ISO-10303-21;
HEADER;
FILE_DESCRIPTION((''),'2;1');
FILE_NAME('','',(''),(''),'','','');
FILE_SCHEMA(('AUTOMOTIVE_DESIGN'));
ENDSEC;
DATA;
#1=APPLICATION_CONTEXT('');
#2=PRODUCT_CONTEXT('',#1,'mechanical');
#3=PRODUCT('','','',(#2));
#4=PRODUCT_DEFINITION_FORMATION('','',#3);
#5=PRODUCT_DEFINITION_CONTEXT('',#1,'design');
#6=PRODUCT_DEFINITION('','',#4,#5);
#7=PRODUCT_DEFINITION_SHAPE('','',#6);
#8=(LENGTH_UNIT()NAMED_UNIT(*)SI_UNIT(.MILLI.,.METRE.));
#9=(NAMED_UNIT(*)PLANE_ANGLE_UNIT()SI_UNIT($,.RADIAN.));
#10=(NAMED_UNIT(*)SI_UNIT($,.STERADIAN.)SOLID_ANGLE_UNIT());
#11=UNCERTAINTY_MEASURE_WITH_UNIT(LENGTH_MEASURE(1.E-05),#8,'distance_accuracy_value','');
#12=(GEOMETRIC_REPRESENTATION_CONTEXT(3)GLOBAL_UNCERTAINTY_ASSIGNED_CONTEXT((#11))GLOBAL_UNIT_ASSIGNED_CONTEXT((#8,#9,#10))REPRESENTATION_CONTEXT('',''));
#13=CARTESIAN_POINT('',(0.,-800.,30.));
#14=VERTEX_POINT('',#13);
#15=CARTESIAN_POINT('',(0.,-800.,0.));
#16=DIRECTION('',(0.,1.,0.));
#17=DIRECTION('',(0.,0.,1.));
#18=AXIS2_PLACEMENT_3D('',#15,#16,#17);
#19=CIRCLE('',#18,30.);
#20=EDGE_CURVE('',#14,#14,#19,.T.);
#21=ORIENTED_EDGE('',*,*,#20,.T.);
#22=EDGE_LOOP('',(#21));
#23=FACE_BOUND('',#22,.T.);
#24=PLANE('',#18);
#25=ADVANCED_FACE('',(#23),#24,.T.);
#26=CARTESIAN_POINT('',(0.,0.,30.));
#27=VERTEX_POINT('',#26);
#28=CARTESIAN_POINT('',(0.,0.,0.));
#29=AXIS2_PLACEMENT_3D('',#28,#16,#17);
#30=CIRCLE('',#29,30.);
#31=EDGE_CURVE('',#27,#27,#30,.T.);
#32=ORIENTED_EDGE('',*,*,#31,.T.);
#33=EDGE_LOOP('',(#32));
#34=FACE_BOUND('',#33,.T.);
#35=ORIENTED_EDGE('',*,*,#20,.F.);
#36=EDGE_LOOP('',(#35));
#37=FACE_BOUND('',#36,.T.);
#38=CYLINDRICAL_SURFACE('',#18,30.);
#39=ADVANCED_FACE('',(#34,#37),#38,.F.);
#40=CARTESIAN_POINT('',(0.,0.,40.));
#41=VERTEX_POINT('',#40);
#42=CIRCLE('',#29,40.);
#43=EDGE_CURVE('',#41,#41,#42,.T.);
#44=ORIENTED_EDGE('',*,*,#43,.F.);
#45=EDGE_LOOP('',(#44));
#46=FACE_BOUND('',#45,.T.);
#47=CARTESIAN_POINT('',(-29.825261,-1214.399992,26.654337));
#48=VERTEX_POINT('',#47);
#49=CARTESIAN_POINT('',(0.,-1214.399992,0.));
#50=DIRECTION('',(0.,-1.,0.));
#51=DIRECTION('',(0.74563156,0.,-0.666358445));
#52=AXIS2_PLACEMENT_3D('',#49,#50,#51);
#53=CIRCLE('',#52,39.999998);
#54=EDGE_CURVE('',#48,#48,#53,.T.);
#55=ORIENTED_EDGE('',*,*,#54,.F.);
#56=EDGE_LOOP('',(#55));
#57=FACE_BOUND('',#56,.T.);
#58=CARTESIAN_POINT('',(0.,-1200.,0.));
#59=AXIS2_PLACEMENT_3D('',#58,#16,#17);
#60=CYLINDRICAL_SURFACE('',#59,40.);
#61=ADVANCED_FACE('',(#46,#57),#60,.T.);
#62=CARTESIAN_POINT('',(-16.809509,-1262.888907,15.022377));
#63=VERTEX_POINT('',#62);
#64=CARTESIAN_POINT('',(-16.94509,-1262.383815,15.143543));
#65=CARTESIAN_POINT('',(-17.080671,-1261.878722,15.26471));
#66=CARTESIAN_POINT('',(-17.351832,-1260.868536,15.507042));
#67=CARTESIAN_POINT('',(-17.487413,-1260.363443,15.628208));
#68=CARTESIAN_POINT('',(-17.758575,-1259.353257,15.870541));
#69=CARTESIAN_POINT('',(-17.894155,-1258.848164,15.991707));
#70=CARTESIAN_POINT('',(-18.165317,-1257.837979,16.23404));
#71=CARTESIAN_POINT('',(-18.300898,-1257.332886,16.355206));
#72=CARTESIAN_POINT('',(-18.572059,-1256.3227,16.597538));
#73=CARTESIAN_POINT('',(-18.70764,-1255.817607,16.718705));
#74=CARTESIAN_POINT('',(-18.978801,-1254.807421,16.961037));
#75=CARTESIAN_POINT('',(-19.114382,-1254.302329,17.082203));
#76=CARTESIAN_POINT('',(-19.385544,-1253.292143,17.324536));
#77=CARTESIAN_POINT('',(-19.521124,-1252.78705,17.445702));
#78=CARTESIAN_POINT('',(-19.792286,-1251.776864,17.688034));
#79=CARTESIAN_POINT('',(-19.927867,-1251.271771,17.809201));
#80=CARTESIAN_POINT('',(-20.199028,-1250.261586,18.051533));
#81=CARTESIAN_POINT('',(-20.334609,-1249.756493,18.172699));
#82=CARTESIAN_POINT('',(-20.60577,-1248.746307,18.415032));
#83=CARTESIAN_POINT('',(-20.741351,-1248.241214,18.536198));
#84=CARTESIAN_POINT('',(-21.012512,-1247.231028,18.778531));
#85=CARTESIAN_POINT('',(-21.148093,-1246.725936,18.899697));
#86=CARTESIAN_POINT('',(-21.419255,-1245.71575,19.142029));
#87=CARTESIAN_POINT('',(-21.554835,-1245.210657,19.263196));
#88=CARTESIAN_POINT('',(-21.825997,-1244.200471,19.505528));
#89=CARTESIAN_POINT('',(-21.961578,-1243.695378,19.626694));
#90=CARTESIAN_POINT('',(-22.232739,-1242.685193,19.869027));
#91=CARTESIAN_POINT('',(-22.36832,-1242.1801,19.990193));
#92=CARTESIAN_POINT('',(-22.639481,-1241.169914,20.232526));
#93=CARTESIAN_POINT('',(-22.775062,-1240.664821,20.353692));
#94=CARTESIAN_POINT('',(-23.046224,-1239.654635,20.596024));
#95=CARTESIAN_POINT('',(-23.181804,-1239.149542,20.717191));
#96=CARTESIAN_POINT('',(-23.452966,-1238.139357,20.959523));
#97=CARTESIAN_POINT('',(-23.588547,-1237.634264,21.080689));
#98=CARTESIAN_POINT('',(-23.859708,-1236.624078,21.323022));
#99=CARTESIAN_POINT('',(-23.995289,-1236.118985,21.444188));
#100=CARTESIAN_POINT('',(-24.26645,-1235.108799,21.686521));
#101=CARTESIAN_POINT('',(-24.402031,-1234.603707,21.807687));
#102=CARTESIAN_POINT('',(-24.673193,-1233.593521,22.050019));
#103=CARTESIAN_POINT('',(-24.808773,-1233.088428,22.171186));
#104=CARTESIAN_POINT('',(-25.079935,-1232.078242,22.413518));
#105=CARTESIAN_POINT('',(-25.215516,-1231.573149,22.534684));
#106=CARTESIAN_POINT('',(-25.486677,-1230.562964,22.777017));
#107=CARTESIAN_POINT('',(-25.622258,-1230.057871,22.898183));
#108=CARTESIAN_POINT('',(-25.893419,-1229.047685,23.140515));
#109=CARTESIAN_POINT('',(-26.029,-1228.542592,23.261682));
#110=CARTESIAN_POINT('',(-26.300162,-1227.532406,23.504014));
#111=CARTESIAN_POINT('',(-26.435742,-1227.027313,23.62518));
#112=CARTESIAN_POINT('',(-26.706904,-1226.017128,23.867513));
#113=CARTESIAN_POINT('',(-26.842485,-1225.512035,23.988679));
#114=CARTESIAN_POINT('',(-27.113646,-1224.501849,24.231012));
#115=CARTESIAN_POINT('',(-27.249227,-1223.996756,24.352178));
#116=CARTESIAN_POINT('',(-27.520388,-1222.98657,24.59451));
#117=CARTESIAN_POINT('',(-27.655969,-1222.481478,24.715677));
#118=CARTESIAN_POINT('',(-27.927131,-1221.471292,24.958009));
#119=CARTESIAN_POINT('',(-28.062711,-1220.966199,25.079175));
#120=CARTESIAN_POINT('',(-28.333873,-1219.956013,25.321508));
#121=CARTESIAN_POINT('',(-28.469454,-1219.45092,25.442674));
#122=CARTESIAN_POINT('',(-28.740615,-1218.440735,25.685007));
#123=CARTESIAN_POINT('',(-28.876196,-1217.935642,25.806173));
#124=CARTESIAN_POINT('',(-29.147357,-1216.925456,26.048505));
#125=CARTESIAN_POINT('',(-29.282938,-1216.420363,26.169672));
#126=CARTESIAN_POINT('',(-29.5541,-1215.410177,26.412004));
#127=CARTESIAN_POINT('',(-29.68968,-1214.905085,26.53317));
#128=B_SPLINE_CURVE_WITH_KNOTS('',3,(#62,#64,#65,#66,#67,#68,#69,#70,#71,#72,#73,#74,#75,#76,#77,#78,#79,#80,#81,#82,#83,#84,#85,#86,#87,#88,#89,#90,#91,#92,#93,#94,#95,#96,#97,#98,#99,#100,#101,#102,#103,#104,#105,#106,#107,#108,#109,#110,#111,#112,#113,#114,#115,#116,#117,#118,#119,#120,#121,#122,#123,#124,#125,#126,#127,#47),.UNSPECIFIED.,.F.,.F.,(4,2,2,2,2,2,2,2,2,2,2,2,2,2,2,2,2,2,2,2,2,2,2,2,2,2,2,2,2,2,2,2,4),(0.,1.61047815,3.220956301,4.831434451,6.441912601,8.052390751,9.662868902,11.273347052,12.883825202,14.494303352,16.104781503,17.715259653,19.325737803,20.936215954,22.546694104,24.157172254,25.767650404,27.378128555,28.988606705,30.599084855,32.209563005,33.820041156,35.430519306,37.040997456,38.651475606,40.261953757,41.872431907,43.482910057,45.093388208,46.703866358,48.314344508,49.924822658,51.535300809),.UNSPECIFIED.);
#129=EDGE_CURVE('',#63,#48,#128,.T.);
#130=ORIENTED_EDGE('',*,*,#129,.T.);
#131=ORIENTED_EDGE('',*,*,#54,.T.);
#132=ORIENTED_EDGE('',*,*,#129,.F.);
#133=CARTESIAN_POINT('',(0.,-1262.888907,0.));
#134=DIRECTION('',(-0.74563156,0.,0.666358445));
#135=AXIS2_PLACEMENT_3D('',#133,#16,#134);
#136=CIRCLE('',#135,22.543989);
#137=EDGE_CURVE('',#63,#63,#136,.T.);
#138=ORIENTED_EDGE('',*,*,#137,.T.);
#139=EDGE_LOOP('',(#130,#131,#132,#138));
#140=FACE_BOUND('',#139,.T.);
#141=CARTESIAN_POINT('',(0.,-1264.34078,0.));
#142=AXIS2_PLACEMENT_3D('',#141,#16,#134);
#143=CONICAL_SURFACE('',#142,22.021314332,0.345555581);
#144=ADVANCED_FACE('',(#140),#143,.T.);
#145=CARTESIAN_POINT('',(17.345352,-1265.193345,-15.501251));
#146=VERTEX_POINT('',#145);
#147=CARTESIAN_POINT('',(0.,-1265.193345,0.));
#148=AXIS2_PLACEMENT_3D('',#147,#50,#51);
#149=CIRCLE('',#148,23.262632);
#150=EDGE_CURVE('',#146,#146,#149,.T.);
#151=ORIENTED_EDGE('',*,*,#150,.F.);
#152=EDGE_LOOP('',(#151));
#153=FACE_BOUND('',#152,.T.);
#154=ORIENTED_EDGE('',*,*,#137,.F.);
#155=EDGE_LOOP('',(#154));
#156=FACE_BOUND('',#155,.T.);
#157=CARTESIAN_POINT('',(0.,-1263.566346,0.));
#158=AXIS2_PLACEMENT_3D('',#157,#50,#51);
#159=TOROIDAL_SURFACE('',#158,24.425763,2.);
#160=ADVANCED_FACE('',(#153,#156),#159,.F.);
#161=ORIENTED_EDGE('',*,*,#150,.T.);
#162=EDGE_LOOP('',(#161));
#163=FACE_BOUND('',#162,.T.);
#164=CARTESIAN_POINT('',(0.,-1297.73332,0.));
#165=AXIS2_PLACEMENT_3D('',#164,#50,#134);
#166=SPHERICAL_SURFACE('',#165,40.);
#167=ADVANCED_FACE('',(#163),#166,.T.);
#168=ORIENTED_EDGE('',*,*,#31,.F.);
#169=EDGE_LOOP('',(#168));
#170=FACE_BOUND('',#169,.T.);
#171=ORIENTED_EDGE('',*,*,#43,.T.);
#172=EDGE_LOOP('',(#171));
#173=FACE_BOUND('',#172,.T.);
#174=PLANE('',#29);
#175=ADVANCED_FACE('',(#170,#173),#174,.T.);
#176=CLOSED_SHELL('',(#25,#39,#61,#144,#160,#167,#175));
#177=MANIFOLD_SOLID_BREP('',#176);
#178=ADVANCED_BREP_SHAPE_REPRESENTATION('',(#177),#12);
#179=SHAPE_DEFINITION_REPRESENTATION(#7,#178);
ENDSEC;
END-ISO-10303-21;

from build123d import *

# Parameters (mm, degrees)
SKETCH1_R           = 40
EXTRUDE1_DEPTH      = 1200
SKETCH2_R           = 30
CUT_EXTRUDE1_DEPTH  = 800
SKETCH_1_R          = 10
CUT_EXTRUDE_1_DEPTH = 35.6


# Read off the part's stored shape, not the designer's step: 连接重组1
with BuildPart() as part:
    # Sketch1 → Extrude1 (new body)
    with BuildSketch(Plane(origin=(0, 0, 0), x_dir=(1, 0, 0), z_dir=(0, 1, 0))):
        with Locations(Location((0, 0, 0), (0, 0, 270))):
            Circle(SKETCH1_R)
    extrude(amount=-EXTRUDE1_DEPTH)

    # Sketch2 → Cut-Extrude1 (cut)
    with BuildSketch(Plane(origin=(0, 0, 0), x_dir=(1, 0, 0), z_dir=(0, 1, 0))):
        with Locations(Location((0, 0, 0), (0, 0, 270))):
            Circle(SKETCH2_R)
    extrude(amount=-CUT_EXTRUDE1_DEPTH, mode=Mode.SUBTRACT)

    # 草图1 → 切除-拉伸1 (cut)
    with BuildSketch(Plane.XZ.offset(1200)):
        with Locations(Location((0, 0, 0), (0, 0, 270))):
            Circle(SKETCH_1_R)
    extrude(amount=-CUT_EXTRUDE_1_DEPTH, mode=Mode.SUBTRACT)

    # 连接重组1 outline → 连接重组1 (revolve)
    with BuildSketch(Plane.XY):
        with BuildLine():
            ThreePointArc((0, -1337.73332), (38.089361999, -1309.948085758), (23.262631735, -1265.193345126))
            ThreePointArc((23.262631735, -1265.193345126), (22.516451416, -1264.161768918), (22.543988515, -1262.888907458))
            Line((22.543988515, -1262.888907458), (39.999998202, -1214.399991661))
            Line((39.999998202, -1214.399991661), (40, -1200))
            Line((40, -1200), (10, -1200))
            Line((10, -1200), (10, -1164.4))
            Line((10, -1164.4), (0, -1164.4))
            Line((0, -1164.4), (0, -1337.73332))
        make_face()
    revolve(axis=Axis((0, 0, 0), (0, 1, 0)))


solid = part.part
